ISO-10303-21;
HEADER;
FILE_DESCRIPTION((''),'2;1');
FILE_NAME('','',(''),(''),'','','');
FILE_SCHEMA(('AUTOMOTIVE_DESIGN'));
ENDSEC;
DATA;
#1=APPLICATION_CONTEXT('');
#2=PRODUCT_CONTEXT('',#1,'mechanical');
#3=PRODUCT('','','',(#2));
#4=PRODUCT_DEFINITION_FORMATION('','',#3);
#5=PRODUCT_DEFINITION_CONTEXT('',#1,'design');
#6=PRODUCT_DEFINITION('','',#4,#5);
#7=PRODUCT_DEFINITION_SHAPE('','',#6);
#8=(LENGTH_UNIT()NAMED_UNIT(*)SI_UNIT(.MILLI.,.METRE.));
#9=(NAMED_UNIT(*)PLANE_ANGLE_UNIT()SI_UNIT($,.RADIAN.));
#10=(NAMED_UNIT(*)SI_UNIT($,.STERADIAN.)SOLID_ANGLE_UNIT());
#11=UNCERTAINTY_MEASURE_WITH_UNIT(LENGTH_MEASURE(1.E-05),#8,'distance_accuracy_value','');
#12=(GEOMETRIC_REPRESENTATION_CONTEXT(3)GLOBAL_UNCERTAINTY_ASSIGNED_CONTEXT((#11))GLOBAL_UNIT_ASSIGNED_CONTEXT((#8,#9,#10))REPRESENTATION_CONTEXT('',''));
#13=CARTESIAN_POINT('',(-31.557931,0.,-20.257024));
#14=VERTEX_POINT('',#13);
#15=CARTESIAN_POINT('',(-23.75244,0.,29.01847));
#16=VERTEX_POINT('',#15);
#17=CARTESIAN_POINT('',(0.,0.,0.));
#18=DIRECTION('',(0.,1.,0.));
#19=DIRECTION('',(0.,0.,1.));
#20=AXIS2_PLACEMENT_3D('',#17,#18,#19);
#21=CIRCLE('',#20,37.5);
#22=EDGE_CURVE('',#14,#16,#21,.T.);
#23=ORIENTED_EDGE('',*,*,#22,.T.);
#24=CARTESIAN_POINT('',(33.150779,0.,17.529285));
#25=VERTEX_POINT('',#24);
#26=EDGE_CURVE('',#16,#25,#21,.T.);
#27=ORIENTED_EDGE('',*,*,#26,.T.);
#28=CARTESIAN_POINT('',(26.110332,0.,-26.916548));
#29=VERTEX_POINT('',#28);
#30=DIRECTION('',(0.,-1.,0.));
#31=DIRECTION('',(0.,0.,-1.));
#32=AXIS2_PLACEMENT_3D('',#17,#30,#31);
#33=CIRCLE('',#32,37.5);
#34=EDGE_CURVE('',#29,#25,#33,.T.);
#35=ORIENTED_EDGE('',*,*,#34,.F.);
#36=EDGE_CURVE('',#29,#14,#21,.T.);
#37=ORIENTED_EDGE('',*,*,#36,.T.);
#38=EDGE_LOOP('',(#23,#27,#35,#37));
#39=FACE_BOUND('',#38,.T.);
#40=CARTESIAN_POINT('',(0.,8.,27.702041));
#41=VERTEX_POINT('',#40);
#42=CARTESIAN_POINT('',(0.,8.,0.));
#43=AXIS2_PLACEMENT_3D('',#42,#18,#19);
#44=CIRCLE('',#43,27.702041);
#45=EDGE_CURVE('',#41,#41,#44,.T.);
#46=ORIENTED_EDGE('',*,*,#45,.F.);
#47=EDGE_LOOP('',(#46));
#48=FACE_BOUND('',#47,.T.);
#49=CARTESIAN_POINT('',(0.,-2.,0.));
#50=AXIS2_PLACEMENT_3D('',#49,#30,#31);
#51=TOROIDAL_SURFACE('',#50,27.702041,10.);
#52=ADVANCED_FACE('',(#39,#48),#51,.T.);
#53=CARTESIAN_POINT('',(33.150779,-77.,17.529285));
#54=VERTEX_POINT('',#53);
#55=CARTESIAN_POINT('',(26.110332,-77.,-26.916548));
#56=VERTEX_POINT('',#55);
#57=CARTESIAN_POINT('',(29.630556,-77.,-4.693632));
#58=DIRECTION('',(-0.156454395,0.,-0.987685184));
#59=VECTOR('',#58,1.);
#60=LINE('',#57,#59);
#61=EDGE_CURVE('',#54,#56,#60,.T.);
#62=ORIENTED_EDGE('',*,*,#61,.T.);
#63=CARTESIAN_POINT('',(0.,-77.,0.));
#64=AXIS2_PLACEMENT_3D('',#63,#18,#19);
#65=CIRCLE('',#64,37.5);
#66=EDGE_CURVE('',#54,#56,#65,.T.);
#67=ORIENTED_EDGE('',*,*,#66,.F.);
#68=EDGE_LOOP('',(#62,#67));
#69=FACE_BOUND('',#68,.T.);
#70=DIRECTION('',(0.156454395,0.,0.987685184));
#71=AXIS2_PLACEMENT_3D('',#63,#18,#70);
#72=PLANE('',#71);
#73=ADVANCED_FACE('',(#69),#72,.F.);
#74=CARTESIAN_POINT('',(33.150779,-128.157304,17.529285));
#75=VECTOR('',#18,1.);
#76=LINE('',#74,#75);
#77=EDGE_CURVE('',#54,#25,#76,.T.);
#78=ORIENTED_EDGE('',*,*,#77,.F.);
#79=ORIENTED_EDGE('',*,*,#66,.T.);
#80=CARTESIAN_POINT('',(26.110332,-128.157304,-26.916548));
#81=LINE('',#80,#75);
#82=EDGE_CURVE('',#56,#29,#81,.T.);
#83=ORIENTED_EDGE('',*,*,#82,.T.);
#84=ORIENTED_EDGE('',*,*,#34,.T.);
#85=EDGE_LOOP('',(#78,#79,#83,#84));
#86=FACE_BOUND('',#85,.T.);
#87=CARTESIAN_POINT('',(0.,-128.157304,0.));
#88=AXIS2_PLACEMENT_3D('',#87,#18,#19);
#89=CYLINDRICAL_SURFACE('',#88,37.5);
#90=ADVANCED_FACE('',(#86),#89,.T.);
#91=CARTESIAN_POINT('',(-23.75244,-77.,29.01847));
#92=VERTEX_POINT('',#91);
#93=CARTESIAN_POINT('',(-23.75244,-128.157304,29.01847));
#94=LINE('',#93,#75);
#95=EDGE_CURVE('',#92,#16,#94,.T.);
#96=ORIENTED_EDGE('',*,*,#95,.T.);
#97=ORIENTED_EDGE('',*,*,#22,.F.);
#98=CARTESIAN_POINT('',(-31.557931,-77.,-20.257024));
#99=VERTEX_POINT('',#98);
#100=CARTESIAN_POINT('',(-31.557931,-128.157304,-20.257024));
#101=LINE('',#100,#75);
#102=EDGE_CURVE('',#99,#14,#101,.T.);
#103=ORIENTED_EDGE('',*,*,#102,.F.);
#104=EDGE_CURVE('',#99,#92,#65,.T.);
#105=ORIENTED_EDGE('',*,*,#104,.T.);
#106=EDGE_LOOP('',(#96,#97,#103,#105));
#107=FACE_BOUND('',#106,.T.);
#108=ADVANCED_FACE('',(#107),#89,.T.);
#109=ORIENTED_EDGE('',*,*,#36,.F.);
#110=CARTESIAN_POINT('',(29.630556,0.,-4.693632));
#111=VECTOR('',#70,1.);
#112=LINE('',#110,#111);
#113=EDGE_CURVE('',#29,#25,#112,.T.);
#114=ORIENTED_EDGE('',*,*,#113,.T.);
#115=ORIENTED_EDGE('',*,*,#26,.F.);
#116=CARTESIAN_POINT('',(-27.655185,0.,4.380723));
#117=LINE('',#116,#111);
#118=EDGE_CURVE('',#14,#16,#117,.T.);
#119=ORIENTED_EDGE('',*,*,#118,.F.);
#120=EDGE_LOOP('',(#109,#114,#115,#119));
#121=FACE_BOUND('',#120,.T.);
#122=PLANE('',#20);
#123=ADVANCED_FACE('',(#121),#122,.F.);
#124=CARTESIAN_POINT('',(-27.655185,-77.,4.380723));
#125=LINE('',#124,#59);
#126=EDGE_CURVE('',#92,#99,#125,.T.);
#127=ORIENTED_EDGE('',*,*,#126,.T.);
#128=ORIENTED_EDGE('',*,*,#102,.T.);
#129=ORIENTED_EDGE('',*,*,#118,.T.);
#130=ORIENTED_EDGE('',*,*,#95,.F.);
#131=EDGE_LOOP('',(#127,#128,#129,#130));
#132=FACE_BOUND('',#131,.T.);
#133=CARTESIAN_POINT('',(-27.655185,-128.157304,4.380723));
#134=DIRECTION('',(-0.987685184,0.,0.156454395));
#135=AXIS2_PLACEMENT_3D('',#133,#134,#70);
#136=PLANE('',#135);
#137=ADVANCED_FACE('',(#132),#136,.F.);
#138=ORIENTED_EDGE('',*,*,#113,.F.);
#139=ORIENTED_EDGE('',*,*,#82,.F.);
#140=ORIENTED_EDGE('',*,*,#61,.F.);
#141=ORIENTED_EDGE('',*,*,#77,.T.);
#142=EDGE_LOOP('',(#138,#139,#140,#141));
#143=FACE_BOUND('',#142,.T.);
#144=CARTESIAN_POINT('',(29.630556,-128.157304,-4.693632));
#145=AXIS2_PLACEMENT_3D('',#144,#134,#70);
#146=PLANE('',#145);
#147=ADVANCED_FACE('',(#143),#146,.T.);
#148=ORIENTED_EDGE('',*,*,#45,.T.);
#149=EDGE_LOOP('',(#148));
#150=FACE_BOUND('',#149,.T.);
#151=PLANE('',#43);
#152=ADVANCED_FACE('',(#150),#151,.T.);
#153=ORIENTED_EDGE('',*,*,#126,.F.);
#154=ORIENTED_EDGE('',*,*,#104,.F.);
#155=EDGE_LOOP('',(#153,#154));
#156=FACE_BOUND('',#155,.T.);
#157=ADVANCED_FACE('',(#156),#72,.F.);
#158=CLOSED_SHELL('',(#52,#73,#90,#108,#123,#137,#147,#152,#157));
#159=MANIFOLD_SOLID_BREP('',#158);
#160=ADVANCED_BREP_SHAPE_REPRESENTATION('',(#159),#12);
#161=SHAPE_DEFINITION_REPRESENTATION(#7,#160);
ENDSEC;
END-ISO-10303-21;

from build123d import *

# Parameters (mm, degrees)
SKETCH1_R           = 37.5
BOSS_EXTRUDE1_DEPTH = 8
FILLET1_R           = 10
BOSS_EXTRUDE3_DEPTH = 77


with BuildPart() as part:
    # Sketch1 → Boss-Extrude1 (new body)
    with BuildSketch(Plane(origin=(0, 0, 0), x_dir=(1, 0, 0), z_dir=(0, 1, 0))):
        with Locations(Location((0, 0, 0), (0, 0, 270))):
            Circle(SKETCH1_R)
    extrude(amount=BOSS_EXTRUDE1_DEPTH)

    # Fillet1
    # the kernel refuses this fillet: 10 mm, written as the material it takes off along each edge
    with BuildSketch(Plane(origin=(0, 8, 0), x_dir=(0, 0, 1), z_dir=(-1, 0, 0))) as fillet1_piece_1:
        with BuildLine():
            CenterArc((27.702041029, -10), FILLET1_R, 11.536959033, 78.463040967)
            Line((27.702041029, 0), (27.702041029, 0.2))
            Line((27.702041029, 0.2), (37.5, 0.2))
            Line((37.5, 0.2), (37.7, 0))
            ThreePointArc((37.7, 0), (37.7, -4), (37.695959179, -7.96))
            Line((37.695959179, -7.96), (37.5, -8))
        make_face()
    revolve(axis=Axis((0, 8, 0), (0, 1, 0)), mode=Mode.SUBTRACT)

    # Sketch3 → Boss-Extrude3 (add)
    with BuildSketch(Plane.XZ):
        with BuildLine():
            Line((-31.557930538, -20.257023971), (-23.752439757, 29.018470077))
            ThreePointArc((-23.752439757, 29.018470077), (-37.038194394, 5.867039803), (-31.557930538, -20.257023971))
        make_face()
        with BuildLine():
            ThreePointArc((37.5, 0), (36.396457433, 9.03038683), (33.150779397, 17.529284794))
            Line((33.150779397, 17.529284794), (26.110331633, -26.916548479))
            ThreePointArc((26.110331633, -26.916548479), (34.535398045, -14.613564996), (37.5, 0))
        make_face()
    extrude(amount=BOSS_EXTRUDE3_DEPTH)


solid = part.part
